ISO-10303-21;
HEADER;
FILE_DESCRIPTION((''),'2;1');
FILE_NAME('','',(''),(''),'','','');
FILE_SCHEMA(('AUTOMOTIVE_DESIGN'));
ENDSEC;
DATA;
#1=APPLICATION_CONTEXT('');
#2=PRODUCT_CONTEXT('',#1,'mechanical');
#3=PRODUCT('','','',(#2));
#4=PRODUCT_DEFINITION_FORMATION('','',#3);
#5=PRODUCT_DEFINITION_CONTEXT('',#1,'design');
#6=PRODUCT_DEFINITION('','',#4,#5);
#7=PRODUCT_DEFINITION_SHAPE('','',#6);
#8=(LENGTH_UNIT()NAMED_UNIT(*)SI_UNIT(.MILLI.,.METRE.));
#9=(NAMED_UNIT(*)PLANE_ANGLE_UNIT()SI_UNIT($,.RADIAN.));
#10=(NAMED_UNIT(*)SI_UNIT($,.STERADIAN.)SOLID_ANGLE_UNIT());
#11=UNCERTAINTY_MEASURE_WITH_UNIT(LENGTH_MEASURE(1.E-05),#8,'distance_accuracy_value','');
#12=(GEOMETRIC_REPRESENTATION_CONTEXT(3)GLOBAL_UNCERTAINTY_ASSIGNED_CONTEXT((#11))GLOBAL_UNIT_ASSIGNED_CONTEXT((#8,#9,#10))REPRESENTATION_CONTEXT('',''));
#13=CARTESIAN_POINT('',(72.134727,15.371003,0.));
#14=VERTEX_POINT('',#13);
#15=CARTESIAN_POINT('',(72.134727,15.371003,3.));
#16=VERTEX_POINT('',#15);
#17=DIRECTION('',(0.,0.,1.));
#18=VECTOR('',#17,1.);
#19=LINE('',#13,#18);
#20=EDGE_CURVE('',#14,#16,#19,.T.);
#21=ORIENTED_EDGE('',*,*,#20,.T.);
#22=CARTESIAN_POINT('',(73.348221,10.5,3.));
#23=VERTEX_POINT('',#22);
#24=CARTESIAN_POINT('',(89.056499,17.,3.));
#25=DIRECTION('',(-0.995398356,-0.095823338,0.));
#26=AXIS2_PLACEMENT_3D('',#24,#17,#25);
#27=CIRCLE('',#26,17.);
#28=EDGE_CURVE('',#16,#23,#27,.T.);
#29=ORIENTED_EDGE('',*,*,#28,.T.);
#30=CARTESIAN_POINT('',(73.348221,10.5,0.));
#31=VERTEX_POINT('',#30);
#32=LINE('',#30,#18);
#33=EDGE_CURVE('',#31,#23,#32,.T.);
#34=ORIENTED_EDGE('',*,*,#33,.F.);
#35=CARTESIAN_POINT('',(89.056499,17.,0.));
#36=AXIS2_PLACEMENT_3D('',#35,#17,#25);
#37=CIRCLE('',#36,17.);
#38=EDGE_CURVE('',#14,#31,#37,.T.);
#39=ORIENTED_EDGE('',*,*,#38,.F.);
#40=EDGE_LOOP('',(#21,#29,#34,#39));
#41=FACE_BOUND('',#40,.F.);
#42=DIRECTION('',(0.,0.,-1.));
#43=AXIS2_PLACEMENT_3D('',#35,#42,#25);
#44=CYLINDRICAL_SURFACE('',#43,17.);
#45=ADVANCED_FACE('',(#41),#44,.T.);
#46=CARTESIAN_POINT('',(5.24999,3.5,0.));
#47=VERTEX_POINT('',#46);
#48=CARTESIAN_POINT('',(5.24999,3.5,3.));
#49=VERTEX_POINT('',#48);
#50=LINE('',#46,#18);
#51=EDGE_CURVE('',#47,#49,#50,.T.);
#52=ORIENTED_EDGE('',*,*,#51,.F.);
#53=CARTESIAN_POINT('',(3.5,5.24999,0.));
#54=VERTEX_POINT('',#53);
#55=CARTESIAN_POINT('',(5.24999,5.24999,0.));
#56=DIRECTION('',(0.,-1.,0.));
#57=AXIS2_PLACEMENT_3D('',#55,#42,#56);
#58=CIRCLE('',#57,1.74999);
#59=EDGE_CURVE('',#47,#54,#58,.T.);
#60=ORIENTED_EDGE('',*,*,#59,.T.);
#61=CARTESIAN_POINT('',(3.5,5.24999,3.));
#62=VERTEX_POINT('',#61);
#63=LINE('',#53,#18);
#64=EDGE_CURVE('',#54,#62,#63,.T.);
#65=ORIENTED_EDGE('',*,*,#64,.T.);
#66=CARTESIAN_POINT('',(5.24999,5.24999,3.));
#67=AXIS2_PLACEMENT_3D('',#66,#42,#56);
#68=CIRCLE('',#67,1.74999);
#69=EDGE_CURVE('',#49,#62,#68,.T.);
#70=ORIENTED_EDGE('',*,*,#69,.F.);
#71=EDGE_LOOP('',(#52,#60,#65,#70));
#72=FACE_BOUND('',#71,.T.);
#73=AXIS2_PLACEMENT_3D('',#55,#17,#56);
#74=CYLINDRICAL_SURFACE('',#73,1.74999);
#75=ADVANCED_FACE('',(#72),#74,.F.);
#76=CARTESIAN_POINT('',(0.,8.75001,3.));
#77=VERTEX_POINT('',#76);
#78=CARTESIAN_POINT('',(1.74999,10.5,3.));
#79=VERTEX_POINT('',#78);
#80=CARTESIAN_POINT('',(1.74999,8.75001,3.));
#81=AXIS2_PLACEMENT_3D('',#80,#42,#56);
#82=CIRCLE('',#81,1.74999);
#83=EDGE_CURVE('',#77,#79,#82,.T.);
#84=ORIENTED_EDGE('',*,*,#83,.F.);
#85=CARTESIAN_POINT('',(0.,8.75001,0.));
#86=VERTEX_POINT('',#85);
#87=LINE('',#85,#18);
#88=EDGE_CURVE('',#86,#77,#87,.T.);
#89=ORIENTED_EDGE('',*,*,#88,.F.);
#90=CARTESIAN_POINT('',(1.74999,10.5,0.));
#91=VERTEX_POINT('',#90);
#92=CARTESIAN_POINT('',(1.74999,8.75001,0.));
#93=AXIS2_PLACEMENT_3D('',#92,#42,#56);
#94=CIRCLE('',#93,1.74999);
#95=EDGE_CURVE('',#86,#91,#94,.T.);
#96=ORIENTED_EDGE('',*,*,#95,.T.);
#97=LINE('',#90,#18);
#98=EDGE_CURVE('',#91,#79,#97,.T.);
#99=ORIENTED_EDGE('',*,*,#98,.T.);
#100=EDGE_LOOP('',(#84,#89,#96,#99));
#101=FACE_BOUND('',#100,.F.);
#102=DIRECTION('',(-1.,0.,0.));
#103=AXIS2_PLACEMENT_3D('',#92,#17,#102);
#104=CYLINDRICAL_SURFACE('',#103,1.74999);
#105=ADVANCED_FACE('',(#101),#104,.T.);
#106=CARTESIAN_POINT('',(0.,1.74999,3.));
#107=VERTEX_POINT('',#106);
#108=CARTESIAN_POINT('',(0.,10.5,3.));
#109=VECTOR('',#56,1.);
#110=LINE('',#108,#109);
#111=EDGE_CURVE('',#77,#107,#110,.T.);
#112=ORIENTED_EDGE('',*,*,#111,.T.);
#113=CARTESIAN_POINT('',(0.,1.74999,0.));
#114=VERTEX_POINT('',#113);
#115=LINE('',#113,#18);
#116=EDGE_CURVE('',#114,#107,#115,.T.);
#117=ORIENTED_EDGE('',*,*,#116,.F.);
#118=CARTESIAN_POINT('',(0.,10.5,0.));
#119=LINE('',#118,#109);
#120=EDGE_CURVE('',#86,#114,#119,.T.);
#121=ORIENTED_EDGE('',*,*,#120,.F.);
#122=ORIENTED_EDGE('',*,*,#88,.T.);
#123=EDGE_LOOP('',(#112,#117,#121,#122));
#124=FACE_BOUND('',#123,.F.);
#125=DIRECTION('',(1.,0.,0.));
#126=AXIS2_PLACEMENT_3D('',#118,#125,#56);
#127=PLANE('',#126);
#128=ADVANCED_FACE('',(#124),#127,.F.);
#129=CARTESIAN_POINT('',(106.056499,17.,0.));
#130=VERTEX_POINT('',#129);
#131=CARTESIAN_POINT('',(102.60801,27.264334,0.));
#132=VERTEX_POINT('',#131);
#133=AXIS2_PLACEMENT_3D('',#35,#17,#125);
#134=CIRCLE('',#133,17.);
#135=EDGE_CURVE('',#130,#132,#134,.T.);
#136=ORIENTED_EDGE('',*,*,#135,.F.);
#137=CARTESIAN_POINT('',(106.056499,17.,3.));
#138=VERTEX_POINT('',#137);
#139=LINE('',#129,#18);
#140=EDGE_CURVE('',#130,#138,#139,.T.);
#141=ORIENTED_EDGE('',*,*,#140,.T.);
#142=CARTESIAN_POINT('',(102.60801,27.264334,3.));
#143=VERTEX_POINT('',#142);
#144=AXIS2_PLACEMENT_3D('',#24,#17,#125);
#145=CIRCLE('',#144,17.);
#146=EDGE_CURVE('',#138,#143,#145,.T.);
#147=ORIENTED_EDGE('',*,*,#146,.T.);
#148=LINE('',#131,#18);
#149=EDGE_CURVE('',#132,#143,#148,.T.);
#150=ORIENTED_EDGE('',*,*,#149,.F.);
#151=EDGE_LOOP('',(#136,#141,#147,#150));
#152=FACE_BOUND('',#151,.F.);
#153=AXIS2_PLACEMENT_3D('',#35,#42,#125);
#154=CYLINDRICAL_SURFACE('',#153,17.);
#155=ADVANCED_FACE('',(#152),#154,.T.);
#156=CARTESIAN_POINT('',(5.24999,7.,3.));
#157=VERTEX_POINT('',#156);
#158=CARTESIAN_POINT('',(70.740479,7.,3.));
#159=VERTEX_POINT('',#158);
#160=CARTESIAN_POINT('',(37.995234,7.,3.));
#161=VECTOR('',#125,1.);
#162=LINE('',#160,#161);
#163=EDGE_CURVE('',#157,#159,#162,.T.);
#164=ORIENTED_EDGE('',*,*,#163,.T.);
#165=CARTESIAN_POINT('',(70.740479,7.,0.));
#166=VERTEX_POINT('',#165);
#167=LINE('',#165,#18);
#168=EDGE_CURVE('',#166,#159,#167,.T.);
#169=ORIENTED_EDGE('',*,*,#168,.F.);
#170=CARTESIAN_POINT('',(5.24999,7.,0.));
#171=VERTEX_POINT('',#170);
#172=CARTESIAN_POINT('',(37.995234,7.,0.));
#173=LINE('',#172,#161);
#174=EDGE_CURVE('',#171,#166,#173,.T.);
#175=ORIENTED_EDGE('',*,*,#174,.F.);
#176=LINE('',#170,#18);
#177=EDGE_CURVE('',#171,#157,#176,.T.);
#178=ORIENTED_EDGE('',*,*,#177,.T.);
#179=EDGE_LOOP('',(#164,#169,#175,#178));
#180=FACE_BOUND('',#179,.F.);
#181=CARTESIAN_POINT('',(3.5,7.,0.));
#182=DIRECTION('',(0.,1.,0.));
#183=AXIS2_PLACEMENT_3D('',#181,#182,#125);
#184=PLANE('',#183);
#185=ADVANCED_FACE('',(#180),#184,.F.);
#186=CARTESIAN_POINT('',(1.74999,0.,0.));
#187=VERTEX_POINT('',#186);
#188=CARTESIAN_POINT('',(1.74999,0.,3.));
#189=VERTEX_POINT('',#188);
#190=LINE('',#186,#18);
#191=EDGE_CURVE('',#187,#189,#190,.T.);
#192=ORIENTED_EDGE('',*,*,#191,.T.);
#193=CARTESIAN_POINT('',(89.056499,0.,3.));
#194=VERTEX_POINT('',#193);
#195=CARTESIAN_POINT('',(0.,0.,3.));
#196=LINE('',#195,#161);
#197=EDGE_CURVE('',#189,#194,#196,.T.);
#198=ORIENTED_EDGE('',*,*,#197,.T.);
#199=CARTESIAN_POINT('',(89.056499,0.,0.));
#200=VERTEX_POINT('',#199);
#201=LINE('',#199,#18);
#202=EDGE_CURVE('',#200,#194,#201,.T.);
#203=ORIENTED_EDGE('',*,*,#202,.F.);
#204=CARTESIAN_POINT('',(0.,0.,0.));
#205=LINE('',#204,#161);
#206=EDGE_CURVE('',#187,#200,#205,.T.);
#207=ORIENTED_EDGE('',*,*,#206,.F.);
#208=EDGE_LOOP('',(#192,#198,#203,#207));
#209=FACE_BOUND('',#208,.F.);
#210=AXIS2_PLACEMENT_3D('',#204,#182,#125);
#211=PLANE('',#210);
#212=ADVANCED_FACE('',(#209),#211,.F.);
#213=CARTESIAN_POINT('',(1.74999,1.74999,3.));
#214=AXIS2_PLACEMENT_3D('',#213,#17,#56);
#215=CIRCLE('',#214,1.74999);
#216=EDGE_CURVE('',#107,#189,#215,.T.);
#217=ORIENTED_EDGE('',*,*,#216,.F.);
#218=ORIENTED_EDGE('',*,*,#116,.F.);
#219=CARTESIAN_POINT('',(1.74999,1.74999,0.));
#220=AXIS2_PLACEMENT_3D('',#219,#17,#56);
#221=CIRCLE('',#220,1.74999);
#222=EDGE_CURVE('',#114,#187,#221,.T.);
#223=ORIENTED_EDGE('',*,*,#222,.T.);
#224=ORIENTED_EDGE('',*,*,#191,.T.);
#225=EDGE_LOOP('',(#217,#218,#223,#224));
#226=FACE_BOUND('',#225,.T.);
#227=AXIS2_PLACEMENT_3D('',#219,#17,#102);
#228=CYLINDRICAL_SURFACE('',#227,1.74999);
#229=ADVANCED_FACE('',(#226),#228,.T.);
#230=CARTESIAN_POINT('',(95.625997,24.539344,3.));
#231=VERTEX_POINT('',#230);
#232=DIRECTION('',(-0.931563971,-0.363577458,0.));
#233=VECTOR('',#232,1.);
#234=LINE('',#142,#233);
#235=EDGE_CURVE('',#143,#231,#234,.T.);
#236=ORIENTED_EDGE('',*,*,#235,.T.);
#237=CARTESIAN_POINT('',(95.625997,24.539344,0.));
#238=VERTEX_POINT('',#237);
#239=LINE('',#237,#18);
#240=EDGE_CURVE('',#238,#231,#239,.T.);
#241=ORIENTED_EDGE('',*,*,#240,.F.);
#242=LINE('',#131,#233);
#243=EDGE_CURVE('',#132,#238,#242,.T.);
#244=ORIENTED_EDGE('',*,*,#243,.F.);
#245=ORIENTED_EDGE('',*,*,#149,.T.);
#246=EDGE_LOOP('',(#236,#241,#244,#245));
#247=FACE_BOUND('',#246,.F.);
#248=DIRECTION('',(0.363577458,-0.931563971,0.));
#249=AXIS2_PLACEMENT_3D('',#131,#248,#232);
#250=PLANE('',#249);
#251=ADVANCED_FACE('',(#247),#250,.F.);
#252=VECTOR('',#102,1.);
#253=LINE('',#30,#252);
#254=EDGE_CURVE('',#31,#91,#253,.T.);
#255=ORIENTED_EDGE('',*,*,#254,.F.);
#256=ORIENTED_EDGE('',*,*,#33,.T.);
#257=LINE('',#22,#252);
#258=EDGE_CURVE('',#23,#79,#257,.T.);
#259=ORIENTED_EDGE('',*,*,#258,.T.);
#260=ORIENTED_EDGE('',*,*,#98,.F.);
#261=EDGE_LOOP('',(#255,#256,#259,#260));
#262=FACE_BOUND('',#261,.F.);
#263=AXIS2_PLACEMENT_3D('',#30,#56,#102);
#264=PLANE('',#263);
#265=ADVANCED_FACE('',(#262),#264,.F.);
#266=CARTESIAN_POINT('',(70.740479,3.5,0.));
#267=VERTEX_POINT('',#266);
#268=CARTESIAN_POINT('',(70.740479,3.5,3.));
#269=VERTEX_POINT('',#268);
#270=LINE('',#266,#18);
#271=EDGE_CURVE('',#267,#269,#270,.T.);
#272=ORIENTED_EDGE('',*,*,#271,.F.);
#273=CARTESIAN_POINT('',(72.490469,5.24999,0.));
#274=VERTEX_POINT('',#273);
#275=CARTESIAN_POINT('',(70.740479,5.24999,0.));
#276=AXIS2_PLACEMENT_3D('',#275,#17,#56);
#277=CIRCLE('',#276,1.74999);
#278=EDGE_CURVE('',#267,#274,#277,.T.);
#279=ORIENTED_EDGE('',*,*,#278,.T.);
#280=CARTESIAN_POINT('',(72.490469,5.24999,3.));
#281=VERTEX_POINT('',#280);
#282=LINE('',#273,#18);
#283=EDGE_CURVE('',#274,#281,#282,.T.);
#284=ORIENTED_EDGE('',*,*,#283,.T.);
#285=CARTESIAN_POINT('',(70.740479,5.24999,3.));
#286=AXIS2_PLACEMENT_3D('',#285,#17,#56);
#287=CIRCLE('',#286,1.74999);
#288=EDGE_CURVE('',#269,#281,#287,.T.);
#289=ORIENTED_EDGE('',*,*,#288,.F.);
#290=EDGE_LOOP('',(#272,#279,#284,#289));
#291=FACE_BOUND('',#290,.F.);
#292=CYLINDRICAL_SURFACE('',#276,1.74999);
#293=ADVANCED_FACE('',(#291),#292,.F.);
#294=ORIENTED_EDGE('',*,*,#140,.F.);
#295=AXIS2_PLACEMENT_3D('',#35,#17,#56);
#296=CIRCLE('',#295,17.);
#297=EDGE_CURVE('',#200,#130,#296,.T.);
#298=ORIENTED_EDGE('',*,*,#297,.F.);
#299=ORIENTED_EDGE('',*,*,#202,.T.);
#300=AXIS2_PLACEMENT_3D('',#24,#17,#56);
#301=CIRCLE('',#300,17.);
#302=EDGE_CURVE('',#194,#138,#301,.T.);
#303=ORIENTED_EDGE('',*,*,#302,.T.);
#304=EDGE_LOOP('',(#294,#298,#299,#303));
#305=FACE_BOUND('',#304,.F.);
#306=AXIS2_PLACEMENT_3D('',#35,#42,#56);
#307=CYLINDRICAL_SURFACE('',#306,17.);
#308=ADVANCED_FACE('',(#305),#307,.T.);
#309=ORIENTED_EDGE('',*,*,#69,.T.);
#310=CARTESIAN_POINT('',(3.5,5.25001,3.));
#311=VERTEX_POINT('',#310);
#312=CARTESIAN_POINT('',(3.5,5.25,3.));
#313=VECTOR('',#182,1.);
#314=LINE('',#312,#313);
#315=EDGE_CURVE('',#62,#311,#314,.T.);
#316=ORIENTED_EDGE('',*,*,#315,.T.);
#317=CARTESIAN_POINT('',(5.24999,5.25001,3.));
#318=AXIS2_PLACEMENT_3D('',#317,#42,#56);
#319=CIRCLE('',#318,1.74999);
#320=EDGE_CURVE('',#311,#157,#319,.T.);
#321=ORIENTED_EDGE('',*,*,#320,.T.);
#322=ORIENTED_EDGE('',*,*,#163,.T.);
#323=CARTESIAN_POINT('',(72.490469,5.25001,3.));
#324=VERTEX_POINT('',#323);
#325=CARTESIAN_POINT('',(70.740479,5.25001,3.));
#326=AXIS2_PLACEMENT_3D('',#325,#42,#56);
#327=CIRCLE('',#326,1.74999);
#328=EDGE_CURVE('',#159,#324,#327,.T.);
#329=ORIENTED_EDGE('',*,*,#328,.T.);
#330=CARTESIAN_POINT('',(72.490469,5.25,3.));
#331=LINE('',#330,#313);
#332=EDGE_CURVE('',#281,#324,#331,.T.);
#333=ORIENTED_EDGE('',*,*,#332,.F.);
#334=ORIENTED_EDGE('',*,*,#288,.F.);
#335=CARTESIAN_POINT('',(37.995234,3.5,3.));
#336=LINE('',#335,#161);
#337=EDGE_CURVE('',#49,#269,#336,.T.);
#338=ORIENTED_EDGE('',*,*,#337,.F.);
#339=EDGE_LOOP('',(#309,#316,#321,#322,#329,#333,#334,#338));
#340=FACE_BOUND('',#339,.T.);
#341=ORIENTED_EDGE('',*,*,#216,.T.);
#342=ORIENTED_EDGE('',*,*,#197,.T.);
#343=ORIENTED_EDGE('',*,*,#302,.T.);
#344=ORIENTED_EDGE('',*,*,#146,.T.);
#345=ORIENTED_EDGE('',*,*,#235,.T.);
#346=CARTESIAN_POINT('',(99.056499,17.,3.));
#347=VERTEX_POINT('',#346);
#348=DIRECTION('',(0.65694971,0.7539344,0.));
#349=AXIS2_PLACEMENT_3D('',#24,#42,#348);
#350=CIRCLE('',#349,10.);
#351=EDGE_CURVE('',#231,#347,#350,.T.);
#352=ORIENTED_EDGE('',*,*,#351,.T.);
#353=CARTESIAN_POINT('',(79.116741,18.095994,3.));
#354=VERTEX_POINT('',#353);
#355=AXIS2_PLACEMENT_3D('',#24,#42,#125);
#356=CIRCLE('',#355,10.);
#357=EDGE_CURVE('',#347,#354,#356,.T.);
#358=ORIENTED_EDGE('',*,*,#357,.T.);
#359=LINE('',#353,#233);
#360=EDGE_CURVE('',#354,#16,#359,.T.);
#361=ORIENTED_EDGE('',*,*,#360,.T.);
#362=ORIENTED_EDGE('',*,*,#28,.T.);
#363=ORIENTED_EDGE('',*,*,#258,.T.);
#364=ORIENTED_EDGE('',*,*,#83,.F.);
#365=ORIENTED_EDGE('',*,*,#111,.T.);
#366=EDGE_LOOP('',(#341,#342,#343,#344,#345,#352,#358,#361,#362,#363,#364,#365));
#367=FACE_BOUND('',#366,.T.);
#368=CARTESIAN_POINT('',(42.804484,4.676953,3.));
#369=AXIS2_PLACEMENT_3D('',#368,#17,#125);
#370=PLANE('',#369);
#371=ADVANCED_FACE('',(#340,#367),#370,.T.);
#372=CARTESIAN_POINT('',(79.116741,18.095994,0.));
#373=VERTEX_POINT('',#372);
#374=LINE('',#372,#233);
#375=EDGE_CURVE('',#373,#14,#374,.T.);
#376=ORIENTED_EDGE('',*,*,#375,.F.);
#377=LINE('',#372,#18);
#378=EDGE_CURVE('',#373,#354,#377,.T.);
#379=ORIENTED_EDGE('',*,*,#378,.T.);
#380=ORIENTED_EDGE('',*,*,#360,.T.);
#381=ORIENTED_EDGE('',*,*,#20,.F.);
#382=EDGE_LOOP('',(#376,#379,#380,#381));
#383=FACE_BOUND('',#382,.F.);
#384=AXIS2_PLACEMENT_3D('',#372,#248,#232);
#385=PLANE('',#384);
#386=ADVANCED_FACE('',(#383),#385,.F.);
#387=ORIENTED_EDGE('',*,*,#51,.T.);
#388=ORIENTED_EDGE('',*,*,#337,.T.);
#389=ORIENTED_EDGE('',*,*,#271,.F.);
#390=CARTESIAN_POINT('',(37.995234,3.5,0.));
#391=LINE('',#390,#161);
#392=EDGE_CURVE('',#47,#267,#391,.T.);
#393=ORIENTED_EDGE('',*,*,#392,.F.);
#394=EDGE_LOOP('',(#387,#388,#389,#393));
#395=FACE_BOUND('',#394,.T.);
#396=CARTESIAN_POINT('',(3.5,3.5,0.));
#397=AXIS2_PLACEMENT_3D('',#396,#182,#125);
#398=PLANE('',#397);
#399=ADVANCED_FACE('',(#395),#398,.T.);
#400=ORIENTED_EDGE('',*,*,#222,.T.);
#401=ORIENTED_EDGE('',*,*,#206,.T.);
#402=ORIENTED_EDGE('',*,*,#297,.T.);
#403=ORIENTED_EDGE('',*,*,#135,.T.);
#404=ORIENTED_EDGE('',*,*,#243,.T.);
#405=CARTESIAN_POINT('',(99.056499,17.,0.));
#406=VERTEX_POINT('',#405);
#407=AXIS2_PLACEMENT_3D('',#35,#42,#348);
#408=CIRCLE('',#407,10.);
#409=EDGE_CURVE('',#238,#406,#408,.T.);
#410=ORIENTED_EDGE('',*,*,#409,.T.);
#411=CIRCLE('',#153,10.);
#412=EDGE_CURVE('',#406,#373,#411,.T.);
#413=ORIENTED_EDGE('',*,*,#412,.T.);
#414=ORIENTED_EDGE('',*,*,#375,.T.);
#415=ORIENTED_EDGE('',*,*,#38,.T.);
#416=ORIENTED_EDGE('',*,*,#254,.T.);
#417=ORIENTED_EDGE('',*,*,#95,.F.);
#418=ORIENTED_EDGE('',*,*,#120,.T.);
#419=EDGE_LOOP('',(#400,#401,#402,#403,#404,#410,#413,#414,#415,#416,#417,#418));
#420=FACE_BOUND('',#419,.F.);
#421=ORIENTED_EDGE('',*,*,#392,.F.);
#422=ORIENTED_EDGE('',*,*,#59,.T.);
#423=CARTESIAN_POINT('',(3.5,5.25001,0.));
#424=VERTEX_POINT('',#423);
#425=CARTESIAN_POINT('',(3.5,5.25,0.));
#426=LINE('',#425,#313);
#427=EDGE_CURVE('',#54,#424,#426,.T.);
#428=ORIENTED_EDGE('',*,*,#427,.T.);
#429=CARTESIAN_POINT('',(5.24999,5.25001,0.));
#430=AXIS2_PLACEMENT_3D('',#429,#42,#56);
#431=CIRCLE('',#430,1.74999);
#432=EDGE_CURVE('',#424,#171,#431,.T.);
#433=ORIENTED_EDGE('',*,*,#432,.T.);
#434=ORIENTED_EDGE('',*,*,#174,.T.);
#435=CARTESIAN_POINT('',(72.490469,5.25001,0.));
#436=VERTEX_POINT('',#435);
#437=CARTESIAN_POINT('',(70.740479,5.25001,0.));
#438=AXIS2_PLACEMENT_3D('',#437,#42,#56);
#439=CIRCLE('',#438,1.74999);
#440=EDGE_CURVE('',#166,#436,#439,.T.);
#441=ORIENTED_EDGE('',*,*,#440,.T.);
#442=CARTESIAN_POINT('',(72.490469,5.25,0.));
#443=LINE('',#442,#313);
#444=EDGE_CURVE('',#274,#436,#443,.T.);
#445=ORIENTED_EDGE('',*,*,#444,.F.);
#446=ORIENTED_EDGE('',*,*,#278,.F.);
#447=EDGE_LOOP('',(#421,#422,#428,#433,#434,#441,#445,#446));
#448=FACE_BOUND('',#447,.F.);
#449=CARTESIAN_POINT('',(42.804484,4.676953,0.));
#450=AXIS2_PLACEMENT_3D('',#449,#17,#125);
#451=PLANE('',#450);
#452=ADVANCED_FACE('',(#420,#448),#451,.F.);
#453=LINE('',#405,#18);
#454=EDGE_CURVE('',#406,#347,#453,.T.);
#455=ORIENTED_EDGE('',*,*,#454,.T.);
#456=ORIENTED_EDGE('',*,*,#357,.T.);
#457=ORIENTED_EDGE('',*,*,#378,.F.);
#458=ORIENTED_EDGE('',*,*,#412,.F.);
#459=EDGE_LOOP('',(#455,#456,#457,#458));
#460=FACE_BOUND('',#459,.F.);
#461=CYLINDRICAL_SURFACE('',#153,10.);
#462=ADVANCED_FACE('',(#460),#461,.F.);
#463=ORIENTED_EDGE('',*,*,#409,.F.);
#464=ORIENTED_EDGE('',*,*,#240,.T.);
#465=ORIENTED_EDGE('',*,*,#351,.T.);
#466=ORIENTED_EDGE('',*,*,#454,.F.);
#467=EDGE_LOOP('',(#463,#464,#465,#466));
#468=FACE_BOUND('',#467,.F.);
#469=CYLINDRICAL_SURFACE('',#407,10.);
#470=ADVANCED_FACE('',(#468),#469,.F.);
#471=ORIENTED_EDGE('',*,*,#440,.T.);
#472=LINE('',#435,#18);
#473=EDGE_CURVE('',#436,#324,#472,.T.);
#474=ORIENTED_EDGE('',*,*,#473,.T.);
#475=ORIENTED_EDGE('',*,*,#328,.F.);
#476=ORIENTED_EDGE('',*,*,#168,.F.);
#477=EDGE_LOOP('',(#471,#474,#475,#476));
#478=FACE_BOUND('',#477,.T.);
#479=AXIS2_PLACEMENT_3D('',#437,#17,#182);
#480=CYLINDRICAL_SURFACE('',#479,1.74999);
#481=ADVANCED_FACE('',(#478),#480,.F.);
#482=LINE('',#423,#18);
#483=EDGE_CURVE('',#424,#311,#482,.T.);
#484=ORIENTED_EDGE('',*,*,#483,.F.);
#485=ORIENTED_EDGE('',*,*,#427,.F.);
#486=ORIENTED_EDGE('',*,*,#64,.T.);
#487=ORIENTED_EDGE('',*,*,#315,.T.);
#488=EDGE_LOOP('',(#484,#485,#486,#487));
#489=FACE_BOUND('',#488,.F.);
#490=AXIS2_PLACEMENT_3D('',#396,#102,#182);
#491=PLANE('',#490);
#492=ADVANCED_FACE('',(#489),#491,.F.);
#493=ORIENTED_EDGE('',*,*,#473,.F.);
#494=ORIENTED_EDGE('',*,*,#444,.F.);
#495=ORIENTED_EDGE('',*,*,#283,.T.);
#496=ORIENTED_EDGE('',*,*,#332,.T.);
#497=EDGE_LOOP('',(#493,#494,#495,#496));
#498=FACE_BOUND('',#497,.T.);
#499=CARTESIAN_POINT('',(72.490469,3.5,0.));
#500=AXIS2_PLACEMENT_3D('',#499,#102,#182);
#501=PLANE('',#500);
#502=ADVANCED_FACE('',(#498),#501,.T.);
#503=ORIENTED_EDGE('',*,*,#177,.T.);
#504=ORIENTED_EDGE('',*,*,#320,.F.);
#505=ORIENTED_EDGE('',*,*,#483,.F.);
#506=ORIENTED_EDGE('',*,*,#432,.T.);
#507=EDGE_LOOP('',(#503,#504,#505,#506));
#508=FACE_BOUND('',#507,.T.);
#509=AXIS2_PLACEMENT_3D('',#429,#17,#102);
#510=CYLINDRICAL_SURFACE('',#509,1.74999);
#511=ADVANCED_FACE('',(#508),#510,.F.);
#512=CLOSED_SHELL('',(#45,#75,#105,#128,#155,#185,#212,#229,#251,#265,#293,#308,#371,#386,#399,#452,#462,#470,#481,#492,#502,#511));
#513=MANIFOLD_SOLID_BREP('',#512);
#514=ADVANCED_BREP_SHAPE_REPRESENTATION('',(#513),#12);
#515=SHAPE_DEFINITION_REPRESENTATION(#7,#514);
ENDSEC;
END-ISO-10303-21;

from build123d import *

# Parameters (mm, degrees)
F1_W     = 68.9904686213
F1_H     = 3.5
F2_DEPTH = 3
F3_R     = 1.74999


# Not quite as in the source:
# - a fillet or chamfer is up to 0.001 mm smaller than in the source, because OpenCascade refuses the exact size


with BuildPart() as f2:
    # F1 (on Top) → F2 (new body)
    with BuildSketch(Plane.XY):
        with BuildLine():
            Line((0, 10.5), (0, 0))
            Line((0, 0), (89.0564994759, 0))
            ThreePointArc((89.0564994759, 0), (79.609277662, 2.8667059749), (73.3482214035, 10.5))
            Line((73.3482214035, 10.5), (59.6541650593, 10.5))
            Line((59.6541650593, 10.5), (0, 10.5))
        make_face()
        with Locations((37.9952343106, 5.25)):
            Rectangle(F1_W, F1_H, mode=Mode.SUBTRACT)
        with BuildLine():
            ThreePointArc((73.3482214035, 10.5), (79.609277662, 2.8667059749), (89.0564994759, 0))
            ThreePointArc((89.0564994759, 0), (101.0773147561, 4.9791847198), (106.0564994759, 17))
            ThreePointArc((106.0564994759, 17), (105.1713324233, 22.414070472), (102.6080101728, 27.2643342614))
            Line((102.6080101728, 27.2643342614), (95.6259965732, 24.5393439959))
            ThreePointArc((95.6259965732, 24.5393439959), (98.158558885, 21.1415594301), (99.0564994759, 17))
            ThreePointArc((99.0564994759, 17), (88.5076755448, 7.0150717432), (79.1167410173, 18.0959935155))
            Line((79.1167410173, 18.0959935155), (72.1347274177, 15.37100325))
            ThreePointArc((72.1347274177, 15.37100325), (72.5606905825, 12.8904636571), (73.3482214035, 10.5))
        make_face()
    extrude(amount=F2_DEPTH)

    # F3 (radius 1.75 in the source; OpenCascade refuses exactly that, so slightly less here)
    f3_edges = [f2.edges().sort_by_distance(p)[0] for p in [
        (3.5, 7, 1.5),
        (3.5, 3.5, 1.5),
        (0, 10.5, 1.5),
        (0, 0, 1.5),
        (72.490469, 7, 1.5),
        (72.490469, 3.5, 1.5),
    ]]
    fillet(f3_edges, radius=F3_R)


solid = f2.part
